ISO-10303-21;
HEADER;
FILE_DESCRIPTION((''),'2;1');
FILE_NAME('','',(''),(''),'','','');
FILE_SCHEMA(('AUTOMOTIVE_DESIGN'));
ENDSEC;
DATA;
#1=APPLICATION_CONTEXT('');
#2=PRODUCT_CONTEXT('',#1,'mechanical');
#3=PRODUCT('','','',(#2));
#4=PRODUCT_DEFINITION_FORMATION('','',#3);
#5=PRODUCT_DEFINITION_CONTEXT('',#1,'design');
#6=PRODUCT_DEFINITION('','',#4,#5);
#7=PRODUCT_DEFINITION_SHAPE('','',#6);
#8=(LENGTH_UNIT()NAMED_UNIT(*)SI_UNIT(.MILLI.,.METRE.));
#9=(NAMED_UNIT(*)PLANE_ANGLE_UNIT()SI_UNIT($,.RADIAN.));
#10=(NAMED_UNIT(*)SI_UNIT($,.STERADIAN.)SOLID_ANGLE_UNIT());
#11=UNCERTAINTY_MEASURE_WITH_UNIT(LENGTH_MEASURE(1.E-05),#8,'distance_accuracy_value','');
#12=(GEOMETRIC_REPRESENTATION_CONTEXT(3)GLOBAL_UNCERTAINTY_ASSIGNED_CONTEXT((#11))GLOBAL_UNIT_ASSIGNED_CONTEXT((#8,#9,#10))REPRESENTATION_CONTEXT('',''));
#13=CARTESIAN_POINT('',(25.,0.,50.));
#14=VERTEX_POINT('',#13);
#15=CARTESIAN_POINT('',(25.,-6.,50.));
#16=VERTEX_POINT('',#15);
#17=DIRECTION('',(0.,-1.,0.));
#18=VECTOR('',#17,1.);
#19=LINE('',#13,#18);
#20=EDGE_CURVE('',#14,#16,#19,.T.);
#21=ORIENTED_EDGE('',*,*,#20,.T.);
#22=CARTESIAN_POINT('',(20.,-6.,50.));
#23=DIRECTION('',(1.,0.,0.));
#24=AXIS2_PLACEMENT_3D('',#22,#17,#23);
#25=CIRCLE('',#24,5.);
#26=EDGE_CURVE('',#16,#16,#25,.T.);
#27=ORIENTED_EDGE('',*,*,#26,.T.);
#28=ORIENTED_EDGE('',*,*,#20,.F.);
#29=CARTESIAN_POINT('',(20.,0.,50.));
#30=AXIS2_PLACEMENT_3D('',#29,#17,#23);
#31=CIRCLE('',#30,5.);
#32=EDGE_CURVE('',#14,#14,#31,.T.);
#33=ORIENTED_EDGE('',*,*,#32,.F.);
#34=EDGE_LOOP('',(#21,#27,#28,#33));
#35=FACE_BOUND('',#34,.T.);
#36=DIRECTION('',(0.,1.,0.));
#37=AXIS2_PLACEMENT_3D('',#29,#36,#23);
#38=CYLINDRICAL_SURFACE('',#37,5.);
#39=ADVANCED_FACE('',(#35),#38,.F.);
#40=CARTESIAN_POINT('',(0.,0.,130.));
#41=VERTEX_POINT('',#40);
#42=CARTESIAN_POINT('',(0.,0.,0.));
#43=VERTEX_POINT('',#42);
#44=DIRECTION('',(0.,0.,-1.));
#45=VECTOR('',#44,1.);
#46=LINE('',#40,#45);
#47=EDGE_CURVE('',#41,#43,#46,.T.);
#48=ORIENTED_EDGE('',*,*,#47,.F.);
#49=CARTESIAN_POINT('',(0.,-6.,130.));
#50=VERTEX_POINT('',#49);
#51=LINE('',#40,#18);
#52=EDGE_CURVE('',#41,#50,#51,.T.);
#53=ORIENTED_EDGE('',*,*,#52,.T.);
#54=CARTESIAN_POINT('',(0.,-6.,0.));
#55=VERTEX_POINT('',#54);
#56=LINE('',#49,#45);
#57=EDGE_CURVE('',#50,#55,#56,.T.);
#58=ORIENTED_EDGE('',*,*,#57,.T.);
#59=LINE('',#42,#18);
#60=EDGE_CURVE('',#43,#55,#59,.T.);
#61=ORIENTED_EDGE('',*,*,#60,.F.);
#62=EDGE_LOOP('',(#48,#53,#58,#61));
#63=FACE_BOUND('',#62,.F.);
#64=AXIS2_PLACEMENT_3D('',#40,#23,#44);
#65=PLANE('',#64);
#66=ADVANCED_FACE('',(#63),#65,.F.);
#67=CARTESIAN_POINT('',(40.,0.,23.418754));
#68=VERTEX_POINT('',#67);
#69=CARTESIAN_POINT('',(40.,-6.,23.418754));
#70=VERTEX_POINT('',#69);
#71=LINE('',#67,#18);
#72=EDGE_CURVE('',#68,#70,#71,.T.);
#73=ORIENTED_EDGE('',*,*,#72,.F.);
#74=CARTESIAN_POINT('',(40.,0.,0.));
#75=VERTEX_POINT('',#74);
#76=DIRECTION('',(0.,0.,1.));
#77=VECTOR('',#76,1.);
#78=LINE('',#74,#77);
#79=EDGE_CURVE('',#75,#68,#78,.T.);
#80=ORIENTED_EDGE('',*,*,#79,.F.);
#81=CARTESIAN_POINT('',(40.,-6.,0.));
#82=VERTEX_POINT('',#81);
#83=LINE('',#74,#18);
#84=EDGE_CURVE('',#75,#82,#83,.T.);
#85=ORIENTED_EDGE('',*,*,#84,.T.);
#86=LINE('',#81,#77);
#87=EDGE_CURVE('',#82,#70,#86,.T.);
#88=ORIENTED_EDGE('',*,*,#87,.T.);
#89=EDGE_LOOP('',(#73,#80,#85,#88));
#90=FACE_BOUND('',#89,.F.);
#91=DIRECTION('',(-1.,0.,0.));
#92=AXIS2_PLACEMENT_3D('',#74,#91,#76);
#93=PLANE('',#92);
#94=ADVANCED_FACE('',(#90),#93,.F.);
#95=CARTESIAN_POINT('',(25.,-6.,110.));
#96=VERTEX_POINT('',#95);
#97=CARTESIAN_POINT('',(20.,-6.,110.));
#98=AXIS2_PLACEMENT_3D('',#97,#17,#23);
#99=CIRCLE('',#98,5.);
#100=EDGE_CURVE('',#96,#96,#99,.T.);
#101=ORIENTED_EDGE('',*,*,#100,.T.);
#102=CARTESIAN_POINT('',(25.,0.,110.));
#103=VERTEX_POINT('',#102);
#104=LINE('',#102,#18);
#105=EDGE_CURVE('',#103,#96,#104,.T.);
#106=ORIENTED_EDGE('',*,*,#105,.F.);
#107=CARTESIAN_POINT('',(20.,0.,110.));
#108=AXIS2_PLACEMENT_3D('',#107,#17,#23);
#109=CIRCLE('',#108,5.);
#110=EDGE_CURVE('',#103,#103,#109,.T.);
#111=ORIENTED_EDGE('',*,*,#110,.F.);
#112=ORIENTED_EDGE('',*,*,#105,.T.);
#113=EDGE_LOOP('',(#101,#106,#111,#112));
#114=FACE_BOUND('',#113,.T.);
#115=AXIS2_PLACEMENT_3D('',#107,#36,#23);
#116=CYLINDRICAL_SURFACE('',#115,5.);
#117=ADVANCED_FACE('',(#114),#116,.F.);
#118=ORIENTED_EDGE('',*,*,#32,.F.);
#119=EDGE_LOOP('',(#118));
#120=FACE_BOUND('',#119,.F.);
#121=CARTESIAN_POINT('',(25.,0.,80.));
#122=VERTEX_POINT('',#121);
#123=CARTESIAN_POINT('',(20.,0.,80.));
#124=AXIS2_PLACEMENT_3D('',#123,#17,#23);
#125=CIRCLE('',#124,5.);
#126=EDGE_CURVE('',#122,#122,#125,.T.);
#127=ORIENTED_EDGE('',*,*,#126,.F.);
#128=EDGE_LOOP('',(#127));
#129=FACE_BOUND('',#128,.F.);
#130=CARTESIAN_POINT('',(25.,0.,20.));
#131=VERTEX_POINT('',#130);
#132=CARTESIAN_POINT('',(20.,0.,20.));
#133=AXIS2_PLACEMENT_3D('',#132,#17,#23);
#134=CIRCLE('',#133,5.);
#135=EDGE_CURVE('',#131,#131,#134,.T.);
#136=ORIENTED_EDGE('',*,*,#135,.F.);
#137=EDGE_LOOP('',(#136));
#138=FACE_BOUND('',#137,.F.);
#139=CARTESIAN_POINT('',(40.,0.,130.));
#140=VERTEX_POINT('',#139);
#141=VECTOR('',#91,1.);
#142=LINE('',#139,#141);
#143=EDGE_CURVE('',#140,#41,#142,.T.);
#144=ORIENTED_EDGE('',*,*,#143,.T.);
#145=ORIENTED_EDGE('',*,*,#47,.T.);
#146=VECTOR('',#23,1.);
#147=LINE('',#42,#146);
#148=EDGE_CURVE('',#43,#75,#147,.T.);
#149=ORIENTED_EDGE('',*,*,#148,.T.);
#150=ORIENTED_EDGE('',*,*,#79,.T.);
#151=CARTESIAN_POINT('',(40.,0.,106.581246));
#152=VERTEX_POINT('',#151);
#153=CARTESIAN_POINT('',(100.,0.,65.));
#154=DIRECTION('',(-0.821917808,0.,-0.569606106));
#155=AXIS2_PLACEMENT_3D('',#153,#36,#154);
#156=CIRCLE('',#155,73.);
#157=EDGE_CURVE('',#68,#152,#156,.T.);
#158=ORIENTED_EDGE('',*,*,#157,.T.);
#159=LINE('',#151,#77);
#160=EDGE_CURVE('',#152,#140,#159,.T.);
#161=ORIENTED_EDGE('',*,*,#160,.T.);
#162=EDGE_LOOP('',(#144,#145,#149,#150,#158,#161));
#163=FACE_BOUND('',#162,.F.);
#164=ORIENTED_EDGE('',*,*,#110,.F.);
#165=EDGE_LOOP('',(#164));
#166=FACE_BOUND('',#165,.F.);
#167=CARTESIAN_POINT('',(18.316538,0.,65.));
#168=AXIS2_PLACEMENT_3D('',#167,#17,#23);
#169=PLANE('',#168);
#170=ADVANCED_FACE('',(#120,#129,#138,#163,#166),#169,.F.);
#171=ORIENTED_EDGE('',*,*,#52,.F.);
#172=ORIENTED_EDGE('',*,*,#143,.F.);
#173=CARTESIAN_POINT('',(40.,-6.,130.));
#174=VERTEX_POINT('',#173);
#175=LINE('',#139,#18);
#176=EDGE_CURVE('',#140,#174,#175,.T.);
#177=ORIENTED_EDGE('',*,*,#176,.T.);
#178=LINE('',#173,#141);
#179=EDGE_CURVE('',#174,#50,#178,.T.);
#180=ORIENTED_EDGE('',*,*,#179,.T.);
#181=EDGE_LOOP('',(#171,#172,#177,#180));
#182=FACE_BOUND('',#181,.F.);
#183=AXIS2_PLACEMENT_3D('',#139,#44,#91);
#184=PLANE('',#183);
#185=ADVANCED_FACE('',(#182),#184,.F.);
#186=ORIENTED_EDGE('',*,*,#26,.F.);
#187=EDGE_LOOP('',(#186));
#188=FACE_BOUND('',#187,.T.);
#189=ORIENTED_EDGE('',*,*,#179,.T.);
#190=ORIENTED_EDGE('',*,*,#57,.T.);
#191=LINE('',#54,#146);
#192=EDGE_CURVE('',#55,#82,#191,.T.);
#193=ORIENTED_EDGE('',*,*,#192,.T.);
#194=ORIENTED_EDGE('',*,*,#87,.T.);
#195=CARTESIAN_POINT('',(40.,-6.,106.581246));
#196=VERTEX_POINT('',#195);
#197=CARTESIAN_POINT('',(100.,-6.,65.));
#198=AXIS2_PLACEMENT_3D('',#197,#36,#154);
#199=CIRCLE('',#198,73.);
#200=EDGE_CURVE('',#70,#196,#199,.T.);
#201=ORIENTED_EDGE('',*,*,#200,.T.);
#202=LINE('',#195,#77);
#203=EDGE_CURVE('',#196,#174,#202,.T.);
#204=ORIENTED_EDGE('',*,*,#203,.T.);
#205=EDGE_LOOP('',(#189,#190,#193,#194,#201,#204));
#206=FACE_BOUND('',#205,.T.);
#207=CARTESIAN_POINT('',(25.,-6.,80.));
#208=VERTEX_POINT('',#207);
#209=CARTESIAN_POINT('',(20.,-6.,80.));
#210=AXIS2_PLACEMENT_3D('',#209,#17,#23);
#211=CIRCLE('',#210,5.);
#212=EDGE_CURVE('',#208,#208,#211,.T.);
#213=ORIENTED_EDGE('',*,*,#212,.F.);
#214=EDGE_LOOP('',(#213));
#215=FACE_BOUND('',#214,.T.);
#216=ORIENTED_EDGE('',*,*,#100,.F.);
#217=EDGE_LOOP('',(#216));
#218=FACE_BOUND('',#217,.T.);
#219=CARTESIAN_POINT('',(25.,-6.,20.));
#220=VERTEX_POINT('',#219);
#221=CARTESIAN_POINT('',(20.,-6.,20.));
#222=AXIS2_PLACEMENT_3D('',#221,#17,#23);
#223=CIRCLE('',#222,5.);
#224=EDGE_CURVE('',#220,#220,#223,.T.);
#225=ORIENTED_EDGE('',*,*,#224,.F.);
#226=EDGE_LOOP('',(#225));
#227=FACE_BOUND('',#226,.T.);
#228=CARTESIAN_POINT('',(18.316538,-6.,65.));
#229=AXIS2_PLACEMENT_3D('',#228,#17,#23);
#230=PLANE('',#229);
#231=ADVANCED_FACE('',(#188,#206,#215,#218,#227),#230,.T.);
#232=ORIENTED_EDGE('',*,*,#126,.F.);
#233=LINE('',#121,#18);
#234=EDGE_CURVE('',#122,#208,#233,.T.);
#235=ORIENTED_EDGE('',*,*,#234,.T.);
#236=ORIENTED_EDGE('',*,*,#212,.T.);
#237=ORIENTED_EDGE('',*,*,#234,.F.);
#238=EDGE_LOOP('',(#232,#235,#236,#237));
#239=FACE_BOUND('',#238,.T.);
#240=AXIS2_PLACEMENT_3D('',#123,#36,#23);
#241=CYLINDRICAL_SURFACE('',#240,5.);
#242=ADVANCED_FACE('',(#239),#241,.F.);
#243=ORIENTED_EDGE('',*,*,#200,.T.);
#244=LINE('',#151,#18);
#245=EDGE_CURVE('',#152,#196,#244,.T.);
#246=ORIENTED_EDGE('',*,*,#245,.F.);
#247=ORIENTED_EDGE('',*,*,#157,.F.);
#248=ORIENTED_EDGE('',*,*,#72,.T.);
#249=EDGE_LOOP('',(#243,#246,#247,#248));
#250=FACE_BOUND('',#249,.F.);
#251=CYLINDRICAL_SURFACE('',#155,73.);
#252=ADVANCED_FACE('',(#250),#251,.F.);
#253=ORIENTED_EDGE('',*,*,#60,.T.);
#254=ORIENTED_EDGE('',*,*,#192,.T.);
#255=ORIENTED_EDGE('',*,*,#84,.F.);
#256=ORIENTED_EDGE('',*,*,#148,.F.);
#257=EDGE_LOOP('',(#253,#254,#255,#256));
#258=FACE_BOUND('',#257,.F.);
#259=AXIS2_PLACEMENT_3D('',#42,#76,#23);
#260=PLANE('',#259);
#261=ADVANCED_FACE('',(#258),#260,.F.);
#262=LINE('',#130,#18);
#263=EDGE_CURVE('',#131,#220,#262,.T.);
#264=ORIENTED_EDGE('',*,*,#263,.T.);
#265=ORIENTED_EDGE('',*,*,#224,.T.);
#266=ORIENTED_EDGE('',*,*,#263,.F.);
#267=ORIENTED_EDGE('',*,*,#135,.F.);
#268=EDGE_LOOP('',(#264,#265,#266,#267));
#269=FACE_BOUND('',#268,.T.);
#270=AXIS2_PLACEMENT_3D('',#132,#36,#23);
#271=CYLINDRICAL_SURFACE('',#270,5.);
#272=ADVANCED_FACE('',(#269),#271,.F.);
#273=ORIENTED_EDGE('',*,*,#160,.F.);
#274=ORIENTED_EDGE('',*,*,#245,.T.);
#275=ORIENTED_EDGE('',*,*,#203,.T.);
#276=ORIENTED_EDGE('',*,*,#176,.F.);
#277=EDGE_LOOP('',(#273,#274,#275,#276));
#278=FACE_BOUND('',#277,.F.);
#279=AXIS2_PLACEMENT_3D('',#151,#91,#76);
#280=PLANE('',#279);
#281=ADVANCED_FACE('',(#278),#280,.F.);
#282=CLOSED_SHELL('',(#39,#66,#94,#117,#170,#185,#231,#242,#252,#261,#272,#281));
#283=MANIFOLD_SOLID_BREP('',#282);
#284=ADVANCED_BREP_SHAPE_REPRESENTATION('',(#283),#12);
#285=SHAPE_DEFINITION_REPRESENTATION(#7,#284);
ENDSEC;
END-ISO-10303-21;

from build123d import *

# Parameters (mm, degrees)
F0_R     = 5
F1_DEPTH = 6


# Not quite as in the source:
# - a feature names something its author has since deleted; it is built from what else it names


with BuildPart() as f1:
    # F0 (on Front) → F1 (new body)
    with BuildSketch(Plane.XZ):
        with BuildLine():
            Line((0, 130), (0, 0))
            Line((0, 0), (40, 0))
            Line((40, 0), (40, 23.4187542274))
            ThreePointArc((40, 23.4187542274), (27, 65), (40, 106.5812457726))
            Line((40, 106.5812457726), (40, 130))
            Line((40, 130), (35, 130))
            Line((35, 130), (0, 130))
        make_face()
        with Locations((20, 20)):
            Circle(F0_R, mode=Mode.SUBTRACT)
        with Locations((20, 50)):
            Circle(F0_R, mode=Mode.SUBTRACT)
        with Locations((20, 80)):
            Circle(F0_R, mode=Mode.SUBTRACT)
        with Locations((20, 110)):
            Circle(F0_R, mode=Mode.SUBTRACT)
    extrude(amount=F1_DEPTH)


solid = f1.part
